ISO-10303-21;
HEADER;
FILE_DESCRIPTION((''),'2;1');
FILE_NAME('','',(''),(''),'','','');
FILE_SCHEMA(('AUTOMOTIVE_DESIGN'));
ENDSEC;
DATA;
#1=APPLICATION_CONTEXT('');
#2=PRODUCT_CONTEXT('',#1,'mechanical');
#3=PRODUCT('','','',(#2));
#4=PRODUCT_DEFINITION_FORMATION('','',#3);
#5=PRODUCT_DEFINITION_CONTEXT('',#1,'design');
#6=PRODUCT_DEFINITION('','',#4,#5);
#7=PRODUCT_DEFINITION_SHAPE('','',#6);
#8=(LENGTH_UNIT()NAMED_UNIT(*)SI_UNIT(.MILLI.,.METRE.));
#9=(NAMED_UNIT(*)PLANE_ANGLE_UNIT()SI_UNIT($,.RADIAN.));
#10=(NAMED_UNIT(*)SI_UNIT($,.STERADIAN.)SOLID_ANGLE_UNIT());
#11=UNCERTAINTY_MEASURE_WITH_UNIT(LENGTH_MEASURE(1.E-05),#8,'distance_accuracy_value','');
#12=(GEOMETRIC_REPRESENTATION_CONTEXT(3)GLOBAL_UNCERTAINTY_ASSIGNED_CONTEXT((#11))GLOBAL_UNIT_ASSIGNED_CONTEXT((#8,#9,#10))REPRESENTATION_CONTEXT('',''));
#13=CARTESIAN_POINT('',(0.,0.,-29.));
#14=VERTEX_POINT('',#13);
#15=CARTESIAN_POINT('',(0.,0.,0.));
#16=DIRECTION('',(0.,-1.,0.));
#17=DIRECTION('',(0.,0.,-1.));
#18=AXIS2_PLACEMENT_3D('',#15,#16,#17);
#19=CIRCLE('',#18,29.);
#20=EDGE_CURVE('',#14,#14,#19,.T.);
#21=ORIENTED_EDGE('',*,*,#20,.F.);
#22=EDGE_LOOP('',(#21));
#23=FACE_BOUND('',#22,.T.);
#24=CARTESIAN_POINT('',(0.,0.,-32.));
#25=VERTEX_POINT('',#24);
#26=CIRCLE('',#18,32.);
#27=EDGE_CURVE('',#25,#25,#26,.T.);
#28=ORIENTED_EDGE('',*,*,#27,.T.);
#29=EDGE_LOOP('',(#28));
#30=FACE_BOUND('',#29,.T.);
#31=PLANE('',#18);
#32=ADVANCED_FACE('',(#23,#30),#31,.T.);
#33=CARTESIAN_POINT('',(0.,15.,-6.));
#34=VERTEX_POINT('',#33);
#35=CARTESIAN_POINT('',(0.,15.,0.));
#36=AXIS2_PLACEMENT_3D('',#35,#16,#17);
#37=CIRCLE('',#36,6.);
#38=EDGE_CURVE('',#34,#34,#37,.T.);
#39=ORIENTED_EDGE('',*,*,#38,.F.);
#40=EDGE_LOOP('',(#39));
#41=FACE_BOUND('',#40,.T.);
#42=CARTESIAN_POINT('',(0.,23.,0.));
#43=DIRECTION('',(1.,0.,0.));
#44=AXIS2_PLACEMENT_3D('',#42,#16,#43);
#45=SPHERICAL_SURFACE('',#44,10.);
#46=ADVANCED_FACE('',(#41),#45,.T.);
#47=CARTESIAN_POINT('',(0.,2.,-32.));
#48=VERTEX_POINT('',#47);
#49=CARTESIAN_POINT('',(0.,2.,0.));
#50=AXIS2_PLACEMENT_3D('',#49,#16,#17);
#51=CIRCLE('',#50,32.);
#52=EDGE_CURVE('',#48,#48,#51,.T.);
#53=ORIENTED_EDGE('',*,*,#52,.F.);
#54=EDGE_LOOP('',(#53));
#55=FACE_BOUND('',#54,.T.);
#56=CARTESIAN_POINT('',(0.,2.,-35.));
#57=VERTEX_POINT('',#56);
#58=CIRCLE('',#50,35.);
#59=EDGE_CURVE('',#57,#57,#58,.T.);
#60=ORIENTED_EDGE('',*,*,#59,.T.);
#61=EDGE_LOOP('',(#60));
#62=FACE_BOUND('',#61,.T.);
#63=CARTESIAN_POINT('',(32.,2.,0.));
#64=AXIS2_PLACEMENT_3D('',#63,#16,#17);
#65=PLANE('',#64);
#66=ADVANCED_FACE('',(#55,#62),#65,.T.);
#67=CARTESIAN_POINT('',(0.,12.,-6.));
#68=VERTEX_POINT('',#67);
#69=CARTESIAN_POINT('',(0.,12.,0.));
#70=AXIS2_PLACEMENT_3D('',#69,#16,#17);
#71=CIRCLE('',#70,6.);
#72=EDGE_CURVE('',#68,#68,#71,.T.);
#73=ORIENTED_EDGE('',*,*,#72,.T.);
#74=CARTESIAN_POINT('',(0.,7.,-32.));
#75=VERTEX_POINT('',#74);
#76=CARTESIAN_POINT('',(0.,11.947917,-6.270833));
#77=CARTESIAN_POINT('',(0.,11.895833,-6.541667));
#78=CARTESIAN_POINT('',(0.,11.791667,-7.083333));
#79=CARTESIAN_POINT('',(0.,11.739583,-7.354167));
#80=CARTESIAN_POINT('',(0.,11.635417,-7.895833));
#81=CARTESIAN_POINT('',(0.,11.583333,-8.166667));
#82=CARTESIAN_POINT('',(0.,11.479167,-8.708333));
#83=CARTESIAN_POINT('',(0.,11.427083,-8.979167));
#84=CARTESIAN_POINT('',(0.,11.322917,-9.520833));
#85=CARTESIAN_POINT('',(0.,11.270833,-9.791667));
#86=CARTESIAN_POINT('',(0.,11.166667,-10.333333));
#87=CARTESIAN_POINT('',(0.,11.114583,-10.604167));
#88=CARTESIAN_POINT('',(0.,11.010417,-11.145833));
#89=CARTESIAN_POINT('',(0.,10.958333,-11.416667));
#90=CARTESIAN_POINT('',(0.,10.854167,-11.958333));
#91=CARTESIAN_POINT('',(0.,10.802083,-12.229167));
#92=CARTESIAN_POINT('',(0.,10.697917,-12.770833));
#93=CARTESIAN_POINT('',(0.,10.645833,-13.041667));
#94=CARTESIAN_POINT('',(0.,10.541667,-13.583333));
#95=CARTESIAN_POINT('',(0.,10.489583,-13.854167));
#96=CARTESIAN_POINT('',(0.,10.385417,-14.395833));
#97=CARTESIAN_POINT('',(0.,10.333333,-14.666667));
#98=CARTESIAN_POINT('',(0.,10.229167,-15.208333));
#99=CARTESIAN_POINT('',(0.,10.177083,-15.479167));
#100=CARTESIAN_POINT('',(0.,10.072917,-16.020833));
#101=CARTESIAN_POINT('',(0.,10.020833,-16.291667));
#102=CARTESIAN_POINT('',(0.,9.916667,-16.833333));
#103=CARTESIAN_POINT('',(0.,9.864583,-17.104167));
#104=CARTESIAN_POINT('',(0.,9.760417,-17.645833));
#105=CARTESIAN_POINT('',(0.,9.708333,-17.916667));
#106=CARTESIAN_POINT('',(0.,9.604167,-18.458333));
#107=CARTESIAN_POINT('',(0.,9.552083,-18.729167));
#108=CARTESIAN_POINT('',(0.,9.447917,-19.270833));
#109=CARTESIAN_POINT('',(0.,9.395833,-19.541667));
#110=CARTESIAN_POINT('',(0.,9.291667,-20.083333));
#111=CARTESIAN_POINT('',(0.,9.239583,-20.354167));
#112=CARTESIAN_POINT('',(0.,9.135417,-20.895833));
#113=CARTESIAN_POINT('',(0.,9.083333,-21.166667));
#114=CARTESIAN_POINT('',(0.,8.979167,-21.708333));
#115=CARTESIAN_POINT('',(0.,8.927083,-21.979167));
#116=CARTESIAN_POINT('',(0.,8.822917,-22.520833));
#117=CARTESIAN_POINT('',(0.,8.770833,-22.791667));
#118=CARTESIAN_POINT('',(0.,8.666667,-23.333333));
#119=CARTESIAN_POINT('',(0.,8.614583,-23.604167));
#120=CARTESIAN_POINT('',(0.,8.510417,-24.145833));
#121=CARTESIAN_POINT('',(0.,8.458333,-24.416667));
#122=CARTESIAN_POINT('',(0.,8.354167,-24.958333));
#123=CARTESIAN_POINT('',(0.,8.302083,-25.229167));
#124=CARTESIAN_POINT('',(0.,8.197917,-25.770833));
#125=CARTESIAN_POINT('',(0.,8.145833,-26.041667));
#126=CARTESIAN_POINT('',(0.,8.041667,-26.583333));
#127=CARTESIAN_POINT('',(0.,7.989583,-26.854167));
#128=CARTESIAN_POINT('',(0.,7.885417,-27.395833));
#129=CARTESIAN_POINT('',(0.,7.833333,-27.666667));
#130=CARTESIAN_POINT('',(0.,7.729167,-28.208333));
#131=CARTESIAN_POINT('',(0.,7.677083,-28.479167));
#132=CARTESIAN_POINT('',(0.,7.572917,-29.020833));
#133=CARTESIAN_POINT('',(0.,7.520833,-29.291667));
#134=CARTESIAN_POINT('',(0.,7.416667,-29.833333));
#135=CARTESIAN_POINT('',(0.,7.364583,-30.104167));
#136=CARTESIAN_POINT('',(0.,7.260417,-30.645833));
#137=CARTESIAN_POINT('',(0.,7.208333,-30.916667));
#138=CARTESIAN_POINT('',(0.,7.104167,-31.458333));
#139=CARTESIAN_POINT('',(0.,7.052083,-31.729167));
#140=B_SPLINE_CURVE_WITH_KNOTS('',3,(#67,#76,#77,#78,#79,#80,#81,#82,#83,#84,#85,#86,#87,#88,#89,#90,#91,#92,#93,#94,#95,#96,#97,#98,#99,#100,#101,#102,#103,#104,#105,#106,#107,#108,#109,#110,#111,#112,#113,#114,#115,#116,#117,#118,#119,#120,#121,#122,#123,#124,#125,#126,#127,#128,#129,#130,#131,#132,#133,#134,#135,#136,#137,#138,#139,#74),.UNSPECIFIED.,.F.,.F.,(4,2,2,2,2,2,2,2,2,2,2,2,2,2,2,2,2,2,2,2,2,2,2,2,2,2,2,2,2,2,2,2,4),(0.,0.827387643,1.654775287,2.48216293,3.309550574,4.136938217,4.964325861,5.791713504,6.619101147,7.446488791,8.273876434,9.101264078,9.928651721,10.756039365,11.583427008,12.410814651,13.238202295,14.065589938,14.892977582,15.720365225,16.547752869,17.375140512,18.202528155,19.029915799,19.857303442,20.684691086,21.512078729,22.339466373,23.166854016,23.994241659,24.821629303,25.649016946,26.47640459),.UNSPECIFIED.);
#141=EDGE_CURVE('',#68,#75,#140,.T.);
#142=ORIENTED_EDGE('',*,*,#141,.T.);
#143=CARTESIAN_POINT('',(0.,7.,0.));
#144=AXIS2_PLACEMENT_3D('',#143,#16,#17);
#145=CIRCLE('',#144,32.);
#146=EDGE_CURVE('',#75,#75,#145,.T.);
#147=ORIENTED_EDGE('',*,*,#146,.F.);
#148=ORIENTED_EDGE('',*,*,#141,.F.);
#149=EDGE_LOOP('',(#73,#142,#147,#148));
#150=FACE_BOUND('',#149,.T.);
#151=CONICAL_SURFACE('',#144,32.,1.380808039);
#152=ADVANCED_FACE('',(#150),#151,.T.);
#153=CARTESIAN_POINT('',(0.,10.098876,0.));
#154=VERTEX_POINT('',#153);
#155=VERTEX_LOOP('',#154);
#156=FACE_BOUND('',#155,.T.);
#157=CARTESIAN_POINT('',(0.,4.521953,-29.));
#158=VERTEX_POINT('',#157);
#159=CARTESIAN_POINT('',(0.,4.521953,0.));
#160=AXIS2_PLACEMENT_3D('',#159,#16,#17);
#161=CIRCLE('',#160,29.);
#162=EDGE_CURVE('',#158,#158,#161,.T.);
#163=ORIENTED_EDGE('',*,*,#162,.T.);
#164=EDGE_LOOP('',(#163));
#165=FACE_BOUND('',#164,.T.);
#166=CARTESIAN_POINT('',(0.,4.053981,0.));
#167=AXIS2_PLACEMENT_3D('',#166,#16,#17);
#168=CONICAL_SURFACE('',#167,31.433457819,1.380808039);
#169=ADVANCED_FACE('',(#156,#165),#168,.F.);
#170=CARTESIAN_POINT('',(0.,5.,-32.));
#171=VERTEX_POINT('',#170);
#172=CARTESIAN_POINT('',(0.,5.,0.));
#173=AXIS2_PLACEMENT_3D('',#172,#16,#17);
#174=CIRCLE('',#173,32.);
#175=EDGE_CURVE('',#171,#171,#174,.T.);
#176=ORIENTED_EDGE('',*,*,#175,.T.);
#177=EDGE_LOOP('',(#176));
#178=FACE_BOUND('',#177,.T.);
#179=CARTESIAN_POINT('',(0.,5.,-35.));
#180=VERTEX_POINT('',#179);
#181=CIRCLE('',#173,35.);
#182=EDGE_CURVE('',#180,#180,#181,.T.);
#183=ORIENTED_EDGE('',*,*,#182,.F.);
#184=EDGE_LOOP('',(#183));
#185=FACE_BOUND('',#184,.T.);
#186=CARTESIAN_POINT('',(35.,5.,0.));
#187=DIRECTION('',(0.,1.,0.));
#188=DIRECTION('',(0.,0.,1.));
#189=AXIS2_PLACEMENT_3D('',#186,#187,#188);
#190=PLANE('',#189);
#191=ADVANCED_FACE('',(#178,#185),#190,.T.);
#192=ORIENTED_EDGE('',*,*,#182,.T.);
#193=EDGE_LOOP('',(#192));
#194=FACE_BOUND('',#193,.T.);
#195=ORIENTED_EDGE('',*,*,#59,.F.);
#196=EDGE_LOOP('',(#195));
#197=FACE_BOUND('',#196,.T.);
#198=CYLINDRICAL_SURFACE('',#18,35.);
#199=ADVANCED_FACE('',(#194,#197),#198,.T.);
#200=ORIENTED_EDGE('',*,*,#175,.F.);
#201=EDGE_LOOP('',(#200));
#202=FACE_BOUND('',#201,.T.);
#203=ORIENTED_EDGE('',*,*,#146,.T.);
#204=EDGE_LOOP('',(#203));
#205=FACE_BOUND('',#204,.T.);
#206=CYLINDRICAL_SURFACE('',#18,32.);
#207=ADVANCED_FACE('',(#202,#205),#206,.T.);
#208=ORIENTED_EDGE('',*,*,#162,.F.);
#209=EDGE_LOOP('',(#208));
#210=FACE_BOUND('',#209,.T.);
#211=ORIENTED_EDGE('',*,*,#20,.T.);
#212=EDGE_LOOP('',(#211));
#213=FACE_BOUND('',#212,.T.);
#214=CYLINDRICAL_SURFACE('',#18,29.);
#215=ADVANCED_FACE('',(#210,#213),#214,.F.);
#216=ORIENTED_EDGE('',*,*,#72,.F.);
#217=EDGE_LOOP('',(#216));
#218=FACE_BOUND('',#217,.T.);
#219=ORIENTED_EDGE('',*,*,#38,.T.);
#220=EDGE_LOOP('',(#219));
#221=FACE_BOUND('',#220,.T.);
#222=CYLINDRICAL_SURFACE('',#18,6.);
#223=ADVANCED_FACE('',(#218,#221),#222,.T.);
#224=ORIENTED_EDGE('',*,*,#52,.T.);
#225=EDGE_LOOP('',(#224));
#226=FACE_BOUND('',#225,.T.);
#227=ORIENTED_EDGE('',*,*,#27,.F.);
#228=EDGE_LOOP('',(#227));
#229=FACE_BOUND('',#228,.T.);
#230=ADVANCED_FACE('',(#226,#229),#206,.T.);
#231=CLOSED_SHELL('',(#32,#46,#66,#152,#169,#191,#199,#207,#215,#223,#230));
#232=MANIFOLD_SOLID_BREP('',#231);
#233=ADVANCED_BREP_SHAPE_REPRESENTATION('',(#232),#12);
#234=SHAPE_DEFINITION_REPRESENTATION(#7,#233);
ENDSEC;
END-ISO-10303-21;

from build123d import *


# Read off the part's stored shape, not the designer's step: 抽壳1
with BuildPart() as part:
    # 草图1 → 旋转1 (revolve)
    with BuildSketch(Plane.XY, mode=Mode.PRIVATE) as revolve_1_sk:
        with BuildLine():
            Line((0, 0), (32, 0))
            Line((32, 0), (32, 2))
            Line((32, 2), (35, 2))
            Line((35, 2), (35, 5))
            Line((35, 5), (32, 5))
            Line((32, 5), (32, 7))
            Line((32, 7), (6, 12))
            Line((6, 12), (6, 15))
            ThreePointArc((6, 15), (9.486832981, 26.16227766), (0, 33))
            Line((0, 33), (0, 0))
        make_face()
    revolve(revolve_1_sk.sketch.rotate(Axis((0, 0, 0), (0, 1, 0)), 90), axis=Axis((0, 0, 0), (0, 1, 0)))

    # 抽壳1 outline → 抽壳1 (revolve, cut)
    with BuildSketch(Plane.XY):
        Polygon((29, 0), (29, 4.521953317), (0, 10.098876393), (0, 0), align=None)
    revolve(axis=Axis((0, 0, 0), (0, 1, 0)), mode=Mode.SUBTRACT)


solid = part.part
